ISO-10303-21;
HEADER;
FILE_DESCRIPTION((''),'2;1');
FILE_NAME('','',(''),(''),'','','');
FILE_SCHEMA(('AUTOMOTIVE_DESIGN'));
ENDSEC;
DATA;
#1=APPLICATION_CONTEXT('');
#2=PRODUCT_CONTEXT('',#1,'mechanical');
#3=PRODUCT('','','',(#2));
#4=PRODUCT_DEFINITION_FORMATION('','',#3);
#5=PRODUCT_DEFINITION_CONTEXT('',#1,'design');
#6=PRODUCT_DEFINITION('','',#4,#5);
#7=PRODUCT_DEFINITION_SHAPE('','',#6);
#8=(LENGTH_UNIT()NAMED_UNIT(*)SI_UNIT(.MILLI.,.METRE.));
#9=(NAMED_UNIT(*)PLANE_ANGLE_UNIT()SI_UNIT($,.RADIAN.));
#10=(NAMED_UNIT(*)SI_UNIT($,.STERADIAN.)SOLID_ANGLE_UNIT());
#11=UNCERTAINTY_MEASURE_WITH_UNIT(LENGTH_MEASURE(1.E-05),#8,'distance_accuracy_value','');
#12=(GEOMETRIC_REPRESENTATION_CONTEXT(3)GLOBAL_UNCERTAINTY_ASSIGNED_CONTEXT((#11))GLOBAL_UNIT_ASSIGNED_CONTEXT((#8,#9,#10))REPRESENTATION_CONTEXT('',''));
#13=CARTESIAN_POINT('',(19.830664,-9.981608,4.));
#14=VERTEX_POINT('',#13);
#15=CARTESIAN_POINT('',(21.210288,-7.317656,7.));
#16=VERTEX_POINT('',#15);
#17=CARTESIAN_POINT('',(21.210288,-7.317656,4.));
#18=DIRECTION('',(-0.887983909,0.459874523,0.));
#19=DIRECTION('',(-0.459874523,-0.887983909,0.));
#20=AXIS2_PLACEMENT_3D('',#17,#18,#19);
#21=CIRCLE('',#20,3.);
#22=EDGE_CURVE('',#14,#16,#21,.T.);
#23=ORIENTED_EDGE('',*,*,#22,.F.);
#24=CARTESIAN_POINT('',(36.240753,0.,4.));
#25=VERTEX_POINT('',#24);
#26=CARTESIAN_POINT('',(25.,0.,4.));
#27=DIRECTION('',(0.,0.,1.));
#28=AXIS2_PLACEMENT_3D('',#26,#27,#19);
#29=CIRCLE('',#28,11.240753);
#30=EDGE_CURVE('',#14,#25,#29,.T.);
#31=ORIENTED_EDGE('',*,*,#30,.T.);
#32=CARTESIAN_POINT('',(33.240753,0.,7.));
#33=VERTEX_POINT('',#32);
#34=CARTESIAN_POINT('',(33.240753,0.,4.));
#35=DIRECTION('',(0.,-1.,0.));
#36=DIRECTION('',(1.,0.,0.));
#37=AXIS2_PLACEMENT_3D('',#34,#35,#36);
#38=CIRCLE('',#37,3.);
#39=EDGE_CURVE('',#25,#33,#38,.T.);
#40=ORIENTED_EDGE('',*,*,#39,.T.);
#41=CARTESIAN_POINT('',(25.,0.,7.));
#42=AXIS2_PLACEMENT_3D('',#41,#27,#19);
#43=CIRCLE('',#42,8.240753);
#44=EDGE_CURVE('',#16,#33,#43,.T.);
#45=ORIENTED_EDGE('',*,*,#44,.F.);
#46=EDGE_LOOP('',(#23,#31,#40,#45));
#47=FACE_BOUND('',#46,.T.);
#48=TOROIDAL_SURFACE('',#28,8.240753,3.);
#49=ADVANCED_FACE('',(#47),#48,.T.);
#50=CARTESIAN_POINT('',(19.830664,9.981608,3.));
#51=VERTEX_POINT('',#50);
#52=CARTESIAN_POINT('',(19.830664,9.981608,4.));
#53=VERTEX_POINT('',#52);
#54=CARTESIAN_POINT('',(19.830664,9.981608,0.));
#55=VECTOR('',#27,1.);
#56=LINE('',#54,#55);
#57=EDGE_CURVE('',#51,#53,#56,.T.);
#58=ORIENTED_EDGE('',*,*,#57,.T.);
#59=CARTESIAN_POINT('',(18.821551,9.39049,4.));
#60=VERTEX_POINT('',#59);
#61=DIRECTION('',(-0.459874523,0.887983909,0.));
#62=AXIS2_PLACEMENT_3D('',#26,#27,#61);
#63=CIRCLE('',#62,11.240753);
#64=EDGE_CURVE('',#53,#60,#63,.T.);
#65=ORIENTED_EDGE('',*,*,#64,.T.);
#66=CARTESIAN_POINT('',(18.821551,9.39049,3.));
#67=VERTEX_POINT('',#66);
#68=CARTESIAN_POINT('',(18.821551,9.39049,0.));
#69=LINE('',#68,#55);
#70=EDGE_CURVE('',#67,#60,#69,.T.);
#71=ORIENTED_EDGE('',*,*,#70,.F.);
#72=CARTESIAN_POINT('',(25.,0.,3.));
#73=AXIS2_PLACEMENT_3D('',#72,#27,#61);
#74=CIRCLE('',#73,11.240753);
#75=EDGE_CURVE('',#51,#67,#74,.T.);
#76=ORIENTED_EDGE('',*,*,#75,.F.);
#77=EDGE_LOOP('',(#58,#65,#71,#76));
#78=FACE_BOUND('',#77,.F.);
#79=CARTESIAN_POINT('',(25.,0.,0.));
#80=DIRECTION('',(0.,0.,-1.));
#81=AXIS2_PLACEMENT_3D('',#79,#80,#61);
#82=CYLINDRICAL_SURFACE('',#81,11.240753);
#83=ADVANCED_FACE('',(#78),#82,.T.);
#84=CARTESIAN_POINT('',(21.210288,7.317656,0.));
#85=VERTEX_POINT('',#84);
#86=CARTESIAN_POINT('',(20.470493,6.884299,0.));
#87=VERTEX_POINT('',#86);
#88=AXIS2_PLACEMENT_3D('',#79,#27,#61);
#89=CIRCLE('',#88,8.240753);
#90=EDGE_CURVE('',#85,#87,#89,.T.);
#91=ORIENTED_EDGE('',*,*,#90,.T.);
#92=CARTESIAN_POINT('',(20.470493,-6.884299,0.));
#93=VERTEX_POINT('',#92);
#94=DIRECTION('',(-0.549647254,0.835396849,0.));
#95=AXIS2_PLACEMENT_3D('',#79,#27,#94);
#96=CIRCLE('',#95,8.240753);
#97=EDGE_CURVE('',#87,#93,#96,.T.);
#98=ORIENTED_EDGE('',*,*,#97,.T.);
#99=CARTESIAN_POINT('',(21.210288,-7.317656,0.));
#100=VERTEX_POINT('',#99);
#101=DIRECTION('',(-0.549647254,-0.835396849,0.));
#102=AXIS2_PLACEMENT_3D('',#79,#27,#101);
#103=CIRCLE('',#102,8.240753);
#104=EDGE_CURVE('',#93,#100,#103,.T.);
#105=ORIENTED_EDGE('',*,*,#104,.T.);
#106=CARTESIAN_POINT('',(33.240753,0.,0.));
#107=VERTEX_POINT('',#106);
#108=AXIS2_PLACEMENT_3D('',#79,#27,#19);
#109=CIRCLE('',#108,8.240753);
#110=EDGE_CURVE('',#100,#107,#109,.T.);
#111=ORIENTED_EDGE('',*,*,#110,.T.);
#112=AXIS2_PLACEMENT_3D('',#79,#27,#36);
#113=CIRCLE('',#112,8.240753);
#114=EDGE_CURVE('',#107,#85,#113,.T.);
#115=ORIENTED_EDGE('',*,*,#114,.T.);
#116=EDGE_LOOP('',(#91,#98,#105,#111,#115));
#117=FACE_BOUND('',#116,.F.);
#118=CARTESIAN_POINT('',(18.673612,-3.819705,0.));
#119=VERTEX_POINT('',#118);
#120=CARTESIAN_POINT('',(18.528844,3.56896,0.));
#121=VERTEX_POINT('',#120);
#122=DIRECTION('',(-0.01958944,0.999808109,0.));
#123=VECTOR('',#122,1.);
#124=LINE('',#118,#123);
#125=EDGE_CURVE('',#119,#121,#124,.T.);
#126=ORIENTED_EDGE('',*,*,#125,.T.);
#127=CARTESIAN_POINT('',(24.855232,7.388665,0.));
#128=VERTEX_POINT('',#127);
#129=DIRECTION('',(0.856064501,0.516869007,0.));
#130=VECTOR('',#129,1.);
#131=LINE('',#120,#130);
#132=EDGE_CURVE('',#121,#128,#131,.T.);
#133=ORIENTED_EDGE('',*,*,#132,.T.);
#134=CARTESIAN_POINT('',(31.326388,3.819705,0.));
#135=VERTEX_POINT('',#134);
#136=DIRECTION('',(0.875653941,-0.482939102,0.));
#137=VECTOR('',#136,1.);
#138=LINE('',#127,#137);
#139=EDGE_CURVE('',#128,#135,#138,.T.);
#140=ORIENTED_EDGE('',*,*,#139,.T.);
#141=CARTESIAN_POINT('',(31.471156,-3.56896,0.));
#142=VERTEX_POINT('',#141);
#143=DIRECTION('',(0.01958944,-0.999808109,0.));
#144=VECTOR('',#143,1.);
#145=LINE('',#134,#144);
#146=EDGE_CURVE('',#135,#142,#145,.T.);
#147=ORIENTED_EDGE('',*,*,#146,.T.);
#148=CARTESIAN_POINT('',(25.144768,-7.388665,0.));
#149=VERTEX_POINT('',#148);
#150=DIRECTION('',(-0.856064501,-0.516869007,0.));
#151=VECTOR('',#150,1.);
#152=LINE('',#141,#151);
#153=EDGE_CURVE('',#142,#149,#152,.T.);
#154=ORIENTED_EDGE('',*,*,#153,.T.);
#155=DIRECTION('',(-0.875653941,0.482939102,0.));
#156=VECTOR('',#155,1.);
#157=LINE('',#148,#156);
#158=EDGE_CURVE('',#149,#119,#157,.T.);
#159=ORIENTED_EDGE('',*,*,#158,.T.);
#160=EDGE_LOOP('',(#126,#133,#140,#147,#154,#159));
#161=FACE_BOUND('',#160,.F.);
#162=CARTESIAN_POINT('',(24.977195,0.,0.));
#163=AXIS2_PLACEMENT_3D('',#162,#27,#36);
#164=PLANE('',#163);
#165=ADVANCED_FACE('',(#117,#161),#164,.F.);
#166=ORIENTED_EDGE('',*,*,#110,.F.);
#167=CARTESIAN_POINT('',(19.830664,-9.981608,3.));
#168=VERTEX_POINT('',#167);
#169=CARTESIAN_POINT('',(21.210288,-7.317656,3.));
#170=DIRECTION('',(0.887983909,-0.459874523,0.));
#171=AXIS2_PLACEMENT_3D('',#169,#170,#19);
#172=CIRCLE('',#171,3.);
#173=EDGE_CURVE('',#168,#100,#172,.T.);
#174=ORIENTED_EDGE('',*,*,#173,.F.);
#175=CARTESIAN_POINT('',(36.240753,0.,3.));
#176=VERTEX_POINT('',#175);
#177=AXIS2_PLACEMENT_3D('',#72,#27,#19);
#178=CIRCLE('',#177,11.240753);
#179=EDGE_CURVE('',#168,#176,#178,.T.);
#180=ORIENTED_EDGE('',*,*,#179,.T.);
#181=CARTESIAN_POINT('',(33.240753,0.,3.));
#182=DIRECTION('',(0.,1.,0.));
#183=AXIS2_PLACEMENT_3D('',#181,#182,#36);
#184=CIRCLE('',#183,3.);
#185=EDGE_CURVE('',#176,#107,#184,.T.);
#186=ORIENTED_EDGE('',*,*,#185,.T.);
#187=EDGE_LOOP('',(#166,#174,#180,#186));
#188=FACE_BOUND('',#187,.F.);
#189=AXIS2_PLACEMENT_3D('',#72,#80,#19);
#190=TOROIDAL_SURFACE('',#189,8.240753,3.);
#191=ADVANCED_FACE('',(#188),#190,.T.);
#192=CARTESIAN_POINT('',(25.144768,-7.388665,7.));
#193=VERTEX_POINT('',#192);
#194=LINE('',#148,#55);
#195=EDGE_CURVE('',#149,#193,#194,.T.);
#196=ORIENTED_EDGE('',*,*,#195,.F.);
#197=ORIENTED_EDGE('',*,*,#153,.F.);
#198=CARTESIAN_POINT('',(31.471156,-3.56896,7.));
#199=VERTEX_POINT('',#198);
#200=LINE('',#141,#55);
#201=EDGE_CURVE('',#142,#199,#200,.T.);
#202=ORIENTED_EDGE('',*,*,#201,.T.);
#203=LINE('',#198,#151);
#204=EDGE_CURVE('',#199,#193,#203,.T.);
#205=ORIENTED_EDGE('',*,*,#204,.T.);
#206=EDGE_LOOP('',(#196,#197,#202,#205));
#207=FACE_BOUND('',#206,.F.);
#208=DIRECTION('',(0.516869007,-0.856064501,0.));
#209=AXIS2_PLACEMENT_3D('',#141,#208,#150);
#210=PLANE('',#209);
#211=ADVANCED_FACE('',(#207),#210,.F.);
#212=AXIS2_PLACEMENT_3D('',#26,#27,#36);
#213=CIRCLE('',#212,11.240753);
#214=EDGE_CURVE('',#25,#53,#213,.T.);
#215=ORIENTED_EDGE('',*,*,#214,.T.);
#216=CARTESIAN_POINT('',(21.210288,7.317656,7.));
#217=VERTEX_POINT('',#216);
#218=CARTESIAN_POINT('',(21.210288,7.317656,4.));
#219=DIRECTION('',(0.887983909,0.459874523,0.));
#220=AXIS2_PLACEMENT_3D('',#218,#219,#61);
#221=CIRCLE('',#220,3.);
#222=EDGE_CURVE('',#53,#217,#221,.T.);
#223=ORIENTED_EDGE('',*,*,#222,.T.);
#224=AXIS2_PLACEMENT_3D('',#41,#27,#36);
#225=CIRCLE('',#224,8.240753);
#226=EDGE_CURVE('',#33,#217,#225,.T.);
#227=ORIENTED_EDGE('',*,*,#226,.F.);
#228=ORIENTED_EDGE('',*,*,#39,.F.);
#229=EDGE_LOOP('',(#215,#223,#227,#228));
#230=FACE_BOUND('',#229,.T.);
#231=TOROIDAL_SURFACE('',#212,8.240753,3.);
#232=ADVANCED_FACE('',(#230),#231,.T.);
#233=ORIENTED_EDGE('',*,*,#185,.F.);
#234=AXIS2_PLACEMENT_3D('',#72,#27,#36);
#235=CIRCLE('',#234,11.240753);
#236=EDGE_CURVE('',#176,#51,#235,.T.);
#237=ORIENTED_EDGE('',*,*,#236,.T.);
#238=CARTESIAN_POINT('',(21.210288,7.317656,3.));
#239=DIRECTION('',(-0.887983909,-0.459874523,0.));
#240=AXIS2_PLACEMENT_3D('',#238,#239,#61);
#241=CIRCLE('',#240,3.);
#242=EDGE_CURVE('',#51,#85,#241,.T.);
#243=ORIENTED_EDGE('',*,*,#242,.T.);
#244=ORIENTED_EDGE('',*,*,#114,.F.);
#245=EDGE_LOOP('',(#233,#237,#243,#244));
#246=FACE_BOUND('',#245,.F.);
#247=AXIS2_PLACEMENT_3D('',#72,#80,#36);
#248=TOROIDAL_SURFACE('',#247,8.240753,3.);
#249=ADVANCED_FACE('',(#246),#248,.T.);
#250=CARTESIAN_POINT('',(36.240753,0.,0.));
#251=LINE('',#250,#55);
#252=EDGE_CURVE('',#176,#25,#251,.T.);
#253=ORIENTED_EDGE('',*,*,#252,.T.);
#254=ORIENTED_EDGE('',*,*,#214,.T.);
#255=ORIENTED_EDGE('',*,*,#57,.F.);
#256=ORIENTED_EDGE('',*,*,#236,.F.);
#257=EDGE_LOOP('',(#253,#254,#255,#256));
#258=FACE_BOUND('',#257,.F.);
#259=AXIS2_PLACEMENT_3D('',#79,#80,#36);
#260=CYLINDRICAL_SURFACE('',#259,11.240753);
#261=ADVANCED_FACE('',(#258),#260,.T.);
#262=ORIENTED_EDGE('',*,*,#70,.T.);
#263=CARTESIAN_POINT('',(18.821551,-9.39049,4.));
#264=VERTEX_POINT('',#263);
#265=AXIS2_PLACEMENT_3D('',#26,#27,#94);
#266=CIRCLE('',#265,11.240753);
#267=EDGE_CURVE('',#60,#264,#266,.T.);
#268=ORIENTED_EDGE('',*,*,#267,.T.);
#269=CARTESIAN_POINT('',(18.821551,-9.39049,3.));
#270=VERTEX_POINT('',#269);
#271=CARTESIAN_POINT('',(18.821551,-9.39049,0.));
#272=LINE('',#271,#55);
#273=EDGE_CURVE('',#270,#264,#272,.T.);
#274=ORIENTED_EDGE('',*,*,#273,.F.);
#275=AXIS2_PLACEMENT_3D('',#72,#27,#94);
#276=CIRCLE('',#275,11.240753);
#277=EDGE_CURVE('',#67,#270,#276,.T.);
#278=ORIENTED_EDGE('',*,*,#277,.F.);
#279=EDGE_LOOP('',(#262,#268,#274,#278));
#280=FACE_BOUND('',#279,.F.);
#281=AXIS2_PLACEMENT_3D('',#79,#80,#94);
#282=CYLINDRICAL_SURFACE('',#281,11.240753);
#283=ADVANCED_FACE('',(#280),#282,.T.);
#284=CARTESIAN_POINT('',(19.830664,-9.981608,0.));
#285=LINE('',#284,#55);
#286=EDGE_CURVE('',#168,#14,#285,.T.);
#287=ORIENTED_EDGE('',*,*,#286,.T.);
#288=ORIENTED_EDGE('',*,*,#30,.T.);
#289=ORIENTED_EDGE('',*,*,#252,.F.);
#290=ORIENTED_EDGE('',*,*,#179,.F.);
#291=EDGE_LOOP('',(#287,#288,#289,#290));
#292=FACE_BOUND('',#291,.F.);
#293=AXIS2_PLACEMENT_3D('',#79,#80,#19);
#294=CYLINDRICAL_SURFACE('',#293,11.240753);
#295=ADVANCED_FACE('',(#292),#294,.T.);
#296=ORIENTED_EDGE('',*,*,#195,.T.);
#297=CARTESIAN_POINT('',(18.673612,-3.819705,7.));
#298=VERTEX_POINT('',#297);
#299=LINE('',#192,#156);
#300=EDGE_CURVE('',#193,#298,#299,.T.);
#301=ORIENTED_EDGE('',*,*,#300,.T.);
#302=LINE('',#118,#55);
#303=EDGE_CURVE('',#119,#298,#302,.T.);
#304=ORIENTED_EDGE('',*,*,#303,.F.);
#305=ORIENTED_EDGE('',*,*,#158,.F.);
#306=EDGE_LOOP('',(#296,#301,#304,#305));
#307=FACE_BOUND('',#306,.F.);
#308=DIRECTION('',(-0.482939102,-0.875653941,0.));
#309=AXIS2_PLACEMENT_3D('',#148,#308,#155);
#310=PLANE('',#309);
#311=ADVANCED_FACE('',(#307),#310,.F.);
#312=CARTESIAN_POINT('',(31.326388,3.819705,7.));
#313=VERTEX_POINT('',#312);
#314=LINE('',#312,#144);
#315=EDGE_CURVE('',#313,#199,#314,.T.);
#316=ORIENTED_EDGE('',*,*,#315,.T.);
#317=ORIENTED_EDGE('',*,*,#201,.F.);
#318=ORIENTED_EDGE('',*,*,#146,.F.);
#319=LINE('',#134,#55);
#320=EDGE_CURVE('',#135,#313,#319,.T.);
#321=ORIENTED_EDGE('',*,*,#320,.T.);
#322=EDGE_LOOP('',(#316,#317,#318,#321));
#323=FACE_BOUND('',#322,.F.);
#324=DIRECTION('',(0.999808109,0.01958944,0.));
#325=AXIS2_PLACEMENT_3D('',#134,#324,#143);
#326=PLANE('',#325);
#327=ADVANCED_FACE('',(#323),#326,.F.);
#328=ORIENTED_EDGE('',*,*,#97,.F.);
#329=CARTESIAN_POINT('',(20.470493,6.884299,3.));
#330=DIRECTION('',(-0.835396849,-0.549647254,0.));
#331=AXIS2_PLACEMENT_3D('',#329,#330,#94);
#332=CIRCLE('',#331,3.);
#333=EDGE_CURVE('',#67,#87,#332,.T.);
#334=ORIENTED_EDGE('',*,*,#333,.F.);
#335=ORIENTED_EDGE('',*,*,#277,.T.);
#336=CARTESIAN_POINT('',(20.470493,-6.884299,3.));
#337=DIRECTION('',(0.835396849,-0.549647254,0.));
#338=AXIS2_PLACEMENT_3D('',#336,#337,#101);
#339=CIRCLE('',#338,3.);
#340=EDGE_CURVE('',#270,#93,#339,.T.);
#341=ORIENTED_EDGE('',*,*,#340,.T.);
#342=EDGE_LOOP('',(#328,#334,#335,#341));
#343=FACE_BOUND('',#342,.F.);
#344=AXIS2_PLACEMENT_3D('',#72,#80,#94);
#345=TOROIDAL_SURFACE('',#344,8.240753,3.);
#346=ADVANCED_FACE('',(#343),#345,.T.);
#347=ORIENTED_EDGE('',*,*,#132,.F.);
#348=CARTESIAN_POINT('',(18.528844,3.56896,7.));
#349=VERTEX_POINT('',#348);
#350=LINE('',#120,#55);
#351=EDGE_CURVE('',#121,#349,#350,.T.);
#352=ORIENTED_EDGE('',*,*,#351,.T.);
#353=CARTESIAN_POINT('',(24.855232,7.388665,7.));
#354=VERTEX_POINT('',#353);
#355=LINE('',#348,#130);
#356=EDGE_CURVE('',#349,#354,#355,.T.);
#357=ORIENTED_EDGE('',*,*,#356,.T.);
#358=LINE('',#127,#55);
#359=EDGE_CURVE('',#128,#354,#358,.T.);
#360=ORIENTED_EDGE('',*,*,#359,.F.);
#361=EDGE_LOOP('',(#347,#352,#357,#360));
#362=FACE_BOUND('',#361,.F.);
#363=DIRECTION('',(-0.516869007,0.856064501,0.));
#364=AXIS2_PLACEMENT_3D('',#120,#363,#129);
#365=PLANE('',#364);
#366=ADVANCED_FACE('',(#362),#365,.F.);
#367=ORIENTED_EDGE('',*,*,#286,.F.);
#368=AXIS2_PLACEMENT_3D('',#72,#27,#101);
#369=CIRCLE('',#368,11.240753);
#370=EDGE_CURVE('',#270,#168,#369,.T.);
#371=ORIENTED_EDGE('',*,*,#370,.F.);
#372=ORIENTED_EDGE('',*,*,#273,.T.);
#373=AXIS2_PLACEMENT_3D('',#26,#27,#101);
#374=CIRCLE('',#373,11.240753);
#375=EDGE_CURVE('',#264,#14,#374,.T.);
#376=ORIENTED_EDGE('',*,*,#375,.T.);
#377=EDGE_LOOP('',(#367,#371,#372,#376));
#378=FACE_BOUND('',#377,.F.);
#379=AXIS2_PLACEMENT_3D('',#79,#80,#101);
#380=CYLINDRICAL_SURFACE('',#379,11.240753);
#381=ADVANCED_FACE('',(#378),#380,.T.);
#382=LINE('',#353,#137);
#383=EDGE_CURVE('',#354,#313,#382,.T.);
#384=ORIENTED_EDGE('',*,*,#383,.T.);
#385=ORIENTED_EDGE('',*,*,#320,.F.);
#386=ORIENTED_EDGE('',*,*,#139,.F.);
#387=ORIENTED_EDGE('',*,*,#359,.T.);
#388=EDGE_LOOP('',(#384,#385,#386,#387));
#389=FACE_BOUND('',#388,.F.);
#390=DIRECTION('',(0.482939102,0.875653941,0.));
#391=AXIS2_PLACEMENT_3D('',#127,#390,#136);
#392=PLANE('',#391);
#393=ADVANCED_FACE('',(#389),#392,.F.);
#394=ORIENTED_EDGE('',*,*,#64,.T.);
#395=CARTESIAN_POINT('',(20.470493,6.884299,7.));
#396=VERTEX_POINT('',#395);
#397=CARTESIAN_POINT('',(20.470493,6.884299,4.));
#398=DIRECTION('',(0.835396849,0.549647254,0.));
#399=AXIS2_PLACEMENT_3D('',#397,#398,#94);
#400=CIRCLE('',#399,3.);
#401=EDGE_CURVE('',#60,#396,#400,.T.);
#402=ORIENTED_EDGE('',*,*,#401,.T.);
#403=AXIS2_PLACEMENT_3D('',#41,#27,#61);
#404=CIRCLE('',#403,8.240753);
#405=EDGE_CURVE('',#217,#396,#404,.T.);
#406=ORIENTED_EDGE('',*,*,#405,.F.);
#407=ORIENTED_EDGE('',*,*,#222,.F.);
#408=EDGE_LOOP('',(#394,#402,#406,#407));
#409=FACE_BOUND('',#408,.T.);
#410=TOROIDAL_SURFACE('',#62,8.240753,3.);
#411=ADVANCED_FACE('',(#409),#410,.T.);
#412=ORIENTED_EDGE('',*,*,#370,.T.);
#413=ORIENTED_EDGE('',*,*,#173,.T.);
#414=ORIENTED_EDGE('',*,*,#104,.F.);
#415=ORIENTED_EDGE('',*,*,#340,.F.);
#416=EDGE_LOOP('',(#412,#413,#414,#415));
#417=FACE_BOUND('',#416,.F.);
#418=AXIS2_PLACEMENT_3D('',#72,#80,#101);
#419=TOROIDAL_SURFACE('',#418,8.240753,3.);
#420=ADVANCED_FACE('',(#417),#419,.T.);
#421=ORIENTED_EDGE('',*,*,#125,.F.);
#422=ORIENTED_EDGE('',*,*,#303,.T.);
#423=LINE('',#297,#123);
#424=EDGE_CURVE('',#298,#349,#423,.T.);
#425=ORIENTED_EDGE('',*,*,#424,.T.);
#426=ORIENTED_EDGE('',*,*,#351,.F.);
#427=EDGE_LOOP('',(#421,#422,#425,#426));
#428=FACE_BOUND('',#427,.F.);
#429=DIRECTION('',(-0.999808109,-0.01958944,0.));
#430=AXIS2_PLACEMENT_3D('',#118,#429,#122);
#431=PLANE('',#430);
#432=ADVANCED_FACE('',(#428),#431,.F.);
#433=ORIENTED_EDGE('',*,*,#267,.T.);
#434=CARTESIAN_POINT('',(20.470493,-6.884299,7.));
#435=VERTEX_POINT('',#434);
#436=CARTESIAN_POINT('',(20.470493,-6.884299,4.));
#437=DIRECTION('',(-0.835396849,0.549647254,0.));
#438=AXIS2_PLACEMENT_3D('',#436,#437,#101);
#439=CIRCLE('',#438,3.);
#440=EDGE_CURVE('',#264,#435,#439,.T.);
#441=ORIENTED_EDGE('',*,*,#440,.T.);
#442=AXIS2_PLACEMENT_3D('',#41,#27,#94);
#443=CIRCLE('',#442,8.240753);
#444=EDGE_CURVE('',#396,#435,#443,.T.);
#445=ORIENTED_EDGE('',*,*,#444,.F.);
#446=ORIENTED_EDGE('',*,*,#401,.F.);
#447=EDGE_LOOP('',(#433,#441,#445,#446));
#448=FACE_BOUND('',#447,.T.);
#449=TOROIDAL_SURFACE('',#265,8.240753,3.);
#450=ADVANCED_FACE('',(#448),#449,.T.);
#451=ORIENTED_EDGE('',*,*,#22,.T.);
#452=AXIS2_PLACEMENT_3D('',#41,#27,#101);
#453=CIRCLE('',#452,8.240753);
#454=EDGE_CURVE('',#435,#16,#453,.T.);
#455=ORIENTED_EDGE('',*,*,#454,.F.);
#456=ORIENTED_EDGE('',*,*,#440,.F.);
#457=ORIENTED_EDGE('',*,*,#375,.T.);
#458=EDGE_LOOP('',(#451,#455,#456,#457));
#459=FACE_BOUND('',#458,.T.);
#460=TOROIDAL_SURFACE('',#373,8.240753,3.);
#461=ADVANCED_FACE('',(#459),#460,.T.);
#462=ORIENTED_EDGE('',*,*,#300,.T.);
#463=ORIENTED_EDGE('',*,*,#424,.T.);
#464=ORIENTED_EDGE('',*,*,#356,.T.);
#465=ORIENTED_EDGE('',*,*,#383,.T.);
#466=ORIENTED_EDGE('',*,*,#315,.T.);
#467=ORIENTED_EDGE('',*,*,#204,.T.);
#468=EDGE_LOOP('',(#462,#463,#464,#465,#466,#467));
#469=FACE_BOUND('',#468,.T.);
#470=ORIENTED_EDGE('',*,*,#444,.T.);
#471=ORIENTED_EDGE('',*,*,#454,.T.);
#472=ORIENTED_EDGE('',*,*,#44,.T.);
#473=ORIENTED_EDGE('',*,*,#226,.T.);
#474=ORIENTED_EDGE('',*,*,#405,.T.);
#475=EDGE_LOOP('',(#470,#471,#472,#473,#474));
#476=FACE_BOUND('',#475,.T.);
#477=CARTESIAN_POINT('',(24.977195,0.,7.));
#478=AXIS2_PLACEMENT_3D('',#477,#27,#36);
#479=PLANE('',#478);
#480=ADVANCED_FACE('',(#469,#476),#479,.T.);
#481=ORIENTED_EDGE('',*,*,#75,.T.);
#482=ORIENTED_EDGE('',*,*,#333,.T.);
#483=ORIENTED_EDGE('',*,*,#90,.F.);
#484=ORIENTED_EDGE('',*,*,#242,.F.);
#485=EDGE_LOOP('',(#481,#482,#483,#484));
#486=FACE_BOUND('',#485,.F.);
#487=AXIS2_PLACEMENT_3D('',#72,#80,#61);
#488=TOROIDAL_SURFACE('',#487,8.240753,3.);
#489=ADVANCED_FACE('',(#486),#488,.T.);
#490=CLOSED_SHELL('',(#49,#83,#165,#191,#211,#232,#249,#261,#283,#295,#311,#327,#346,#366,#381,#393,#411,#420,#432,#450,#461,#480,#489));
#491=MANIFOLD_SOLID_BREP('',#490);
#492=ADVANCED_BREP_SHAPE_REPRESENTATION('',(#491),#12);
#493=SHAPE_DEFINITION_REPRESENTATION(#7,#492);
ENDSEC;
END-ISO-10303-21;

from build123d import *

# Parameters (mm, degrees)
F1_DEPTH = 7
F2_R     = 3


# Not quite as in the source:
# - a feature names something its author has since deleted; it is built from what else it names


with BuildPart() as f1:
    # F0 (on Top) → F1 (new body)
    with BuildSketch(Plane.XY):
        with BuildLine():
            ThreePointArc((19.8306639352, -9.9816080654), (30.8415453201, -9.6036911235), (36.2407533076, 0))
            ThreePointArc((36.2407533076, 0), (30.8415453201, 9.6036911235), (19.8306639352, 9.9816080654))
            ThreePointArc((19.8306639352, 9.9816080654), (19.3470475071, 9.6503015364), (18.8215508103, 9.3904898984))
            ThreePointArc((18.8215508103, 9.3904898984), (13.7592466924, 0), (18.8215508103, -9.3904898984))
            ThreePointArc((18.8215508103, -9.3904898984), (19.3470475071, -9.6503015364), (19.8306639352, -9.9816080654))
        make_face()
        Polygon((31.3263880982, 3.8197050887), (31.4711556909, -3.5689602629), (25.1447675927, -7.3886653516), (18.6736119018, -3.8197050887), (18.5288443091, 3.5689602629), (24.8552324073, 7.3886653516), align=None, mode=Mode.SUBTRACT)
        with BuildLine():
            ThreePointArc((18.8215508103, -9.3904898984), (19.3184145947, -9.6991815224), (19.8306639352, -9.9816080654))
            ThreePointArc((19.8306639352, -9.9816080654), (19.3470475071, -9.6503015364), (18.8215508103, -9.3904898984))
        make_face()
        with BuildLine():
            ThreePointArc((18.8215508103, 9.3904898984), (19.3470475071, 9.6503015364), (19.8306639352, 9.9816080654))
            ThreePointArc((19.8306639352, 9.9816080654), (19.3184145947, 9.6991815224), (18.8215508103, 9.3904898984))
        make_face()
    extrude(amount=F1_DEPTH)

    # F2
    f2_edges = [f1.edges().sort_by_distance(p)[0] for p in [
        (31.178449, -9.39049, 7),
        (31.178449, -9.39049, 0),
    ]]
    fillet(f2_edges, radius=F2_R)


solid = f1.part
